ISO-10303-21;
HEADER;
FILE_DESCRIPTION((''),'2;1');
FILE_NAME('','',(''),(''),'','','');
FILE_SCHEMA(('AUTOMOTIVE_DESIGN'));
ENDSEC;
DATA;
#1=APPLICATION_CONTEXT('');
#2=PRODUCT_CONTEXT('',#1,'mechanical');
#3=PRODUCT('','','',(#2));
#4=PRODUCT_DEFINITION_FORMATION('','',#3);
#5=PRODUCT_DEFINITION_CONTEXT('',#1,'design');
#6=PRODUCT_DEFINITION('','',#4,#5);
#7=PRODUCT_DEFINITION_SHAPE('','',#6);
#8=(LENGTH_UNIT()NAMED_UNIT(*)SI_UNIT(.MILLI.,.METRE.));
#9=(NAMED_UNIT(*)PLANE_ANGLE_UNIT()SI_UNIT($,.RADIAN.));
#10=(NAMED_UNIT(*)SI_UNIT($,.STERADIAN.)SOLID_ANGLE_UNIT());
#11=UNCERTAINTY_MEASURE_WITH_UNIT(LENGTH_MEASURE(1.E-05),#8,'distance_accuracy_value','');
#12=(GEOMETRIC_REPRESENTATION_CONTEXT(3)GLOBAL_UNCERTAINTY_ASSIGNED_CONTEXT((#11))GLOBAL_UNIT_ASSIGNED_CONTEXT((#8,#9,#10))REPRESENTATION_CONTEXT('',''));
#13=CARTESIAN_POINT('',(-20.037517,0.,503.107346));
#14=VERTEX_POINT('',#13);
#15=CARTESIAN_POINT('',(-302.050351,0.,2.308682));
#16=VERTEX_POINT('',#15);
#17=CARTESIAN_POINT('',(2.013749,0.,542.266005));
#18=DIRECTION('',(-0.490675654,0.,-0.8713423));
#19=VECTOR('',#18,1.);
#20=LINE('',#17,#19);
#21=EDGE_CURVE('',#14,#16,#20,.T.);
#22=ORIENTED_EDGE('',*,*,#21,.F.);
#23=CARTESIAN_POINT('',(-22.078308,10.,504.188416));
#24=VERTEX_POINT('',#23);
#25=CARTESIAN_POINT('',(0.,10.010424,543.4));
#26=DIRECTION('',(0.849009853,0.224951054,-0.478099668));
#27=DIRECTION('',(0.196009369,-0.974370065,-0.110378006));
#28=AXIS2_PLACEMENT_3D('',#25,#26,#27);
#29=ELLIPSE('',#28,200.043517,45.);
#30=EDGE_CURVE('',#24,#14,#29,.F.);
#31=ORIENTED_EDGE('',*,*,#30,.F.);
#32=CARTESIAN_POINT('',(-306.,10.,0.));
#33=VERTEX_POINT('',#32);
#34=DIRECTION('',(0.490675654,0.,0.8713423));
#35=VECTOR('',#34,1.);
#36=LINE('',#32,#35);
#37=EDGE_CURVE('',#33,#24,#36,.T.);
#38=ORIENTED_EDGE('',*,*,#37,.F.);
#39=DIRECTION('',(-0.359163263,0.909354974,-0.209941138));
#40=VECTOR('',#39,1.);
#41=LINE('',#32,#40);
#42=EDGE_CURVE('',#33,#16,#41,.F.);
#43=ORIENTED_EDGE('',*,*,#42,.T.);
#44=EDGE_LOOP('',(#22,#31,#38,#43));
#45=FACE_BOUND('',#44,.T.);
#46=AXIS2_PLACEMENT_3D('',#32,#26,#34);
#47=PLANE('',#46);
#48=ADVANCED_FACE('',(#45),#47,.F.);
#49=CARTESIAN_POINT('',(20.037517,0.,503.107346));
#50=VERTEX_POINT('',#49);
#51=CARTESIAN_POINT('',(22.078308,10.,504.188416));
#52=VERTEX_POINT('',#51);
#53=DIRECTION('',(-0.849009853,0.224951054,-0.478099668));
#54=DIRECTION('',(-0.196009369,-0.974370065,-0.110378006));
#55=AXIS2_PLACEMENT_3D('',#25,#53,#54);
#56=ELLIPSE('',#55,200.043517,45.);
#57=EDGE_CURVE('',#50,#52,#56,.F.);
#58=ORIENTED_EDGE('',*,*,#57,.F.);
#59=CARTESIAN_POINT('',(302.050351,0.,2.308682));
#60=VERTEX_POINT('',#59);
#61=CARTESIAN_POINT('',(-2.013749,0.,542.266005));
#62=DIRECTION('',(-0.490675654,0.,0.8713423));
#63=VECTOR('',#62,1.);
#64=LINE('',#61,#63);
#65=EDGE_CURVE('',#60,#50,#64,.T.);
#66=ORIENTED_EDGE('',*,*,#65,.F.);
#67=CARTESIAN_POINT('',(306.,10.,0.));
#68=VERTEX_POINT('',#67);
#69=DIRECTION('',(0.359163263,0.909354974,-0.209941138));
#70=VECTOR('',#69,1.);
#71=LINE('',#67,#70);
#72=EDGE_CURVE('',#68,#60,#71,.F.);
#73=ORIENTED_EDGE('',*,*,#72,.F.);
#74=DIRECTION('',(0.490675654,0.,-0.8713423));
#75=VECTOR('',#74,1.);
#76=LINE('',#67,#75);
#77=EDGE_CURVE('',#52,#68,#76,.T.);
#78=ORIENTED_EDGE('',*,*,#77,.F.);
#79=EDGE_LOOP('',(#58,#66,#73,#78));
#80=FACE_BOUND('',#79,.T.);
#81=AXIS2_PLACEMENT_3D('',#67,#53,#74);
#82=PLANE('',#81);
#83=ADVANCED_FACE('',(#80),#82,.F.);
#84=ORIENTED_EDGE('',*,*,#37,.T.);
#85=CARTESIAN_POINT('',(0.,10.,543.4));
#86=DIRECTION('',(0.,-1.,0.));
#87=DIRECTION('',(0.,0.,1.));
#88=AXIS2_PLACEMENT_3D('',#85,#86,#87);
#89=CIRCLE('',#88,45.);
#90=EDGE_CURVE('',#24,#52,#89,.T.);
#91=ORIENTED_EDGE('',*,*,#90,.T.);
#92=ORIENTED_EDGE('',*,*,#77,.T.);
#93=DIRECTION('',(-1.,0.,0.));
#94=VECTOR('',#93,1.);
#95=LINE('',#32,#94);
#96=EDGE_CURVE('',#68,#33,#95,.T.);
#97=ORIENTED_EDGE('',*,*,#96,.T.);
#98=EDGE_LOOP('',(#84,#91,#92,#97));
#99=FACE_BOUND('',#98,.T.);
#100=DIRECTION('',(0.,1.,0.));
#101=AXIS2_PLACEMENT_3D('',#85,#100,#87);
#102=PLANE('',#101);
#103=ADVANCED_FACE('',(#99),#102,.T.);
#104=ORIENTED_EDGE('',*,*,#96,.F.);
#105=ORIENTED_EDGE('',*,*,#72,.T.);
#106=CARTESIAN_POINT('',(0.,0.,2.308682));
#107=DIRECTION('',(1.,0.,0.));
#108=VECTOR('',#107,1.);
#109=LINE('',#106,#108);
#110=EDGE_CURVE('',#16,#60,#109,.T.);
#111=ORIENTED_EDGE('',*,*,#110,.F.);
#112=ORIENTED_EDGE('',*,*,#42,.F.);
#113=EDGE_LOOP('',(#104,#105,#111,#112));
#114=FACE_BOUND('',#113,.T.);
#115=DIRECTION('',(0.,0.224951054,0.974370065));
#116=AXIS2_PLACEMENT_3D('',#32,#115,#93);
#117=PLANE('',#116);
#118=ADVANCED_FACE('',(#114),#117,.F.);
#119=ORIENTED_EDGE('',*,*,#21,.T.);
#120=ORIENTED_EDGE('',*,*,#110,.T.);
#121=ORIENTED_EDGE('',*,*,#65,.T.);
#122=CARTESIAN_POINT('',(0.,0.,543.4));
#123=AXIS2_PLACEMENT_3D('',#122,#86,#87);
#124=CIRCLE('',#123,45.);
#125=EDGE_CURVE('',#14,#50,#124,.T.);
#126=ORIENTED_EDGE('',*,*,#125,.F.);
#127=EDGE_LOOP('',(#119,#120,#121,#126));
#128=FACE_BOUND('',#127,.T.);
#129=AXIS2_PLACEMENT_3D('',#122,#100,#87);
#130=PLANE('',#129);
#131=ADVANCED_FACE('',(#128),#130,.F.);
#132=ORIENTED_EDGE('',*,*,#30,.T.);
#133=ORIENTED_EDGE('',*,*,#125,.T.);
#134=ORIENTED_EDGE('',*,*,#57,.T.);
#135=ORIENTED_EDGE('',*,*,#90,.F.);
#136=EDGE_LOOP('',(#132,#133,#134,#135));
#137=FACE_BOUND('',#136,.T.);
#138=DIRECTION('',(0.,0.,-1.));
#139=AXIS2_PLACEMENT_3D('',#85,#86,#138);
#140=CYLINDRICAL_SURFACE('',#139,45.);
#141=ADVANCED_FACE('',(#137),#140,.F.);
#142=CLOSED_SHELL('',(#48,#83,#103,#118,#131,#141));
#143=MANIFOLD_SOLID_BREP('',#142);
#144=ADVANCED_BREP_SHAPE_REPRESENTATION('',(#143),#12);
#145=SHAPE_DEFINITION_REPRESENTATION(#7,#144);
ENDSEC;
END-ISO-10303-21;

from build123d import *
from OCP.BRepFilletAPI import BRepFilletAPI_MakeChamfer

# Parameters (mm, degrees)
BOSS_EXTRUDE1_DEPTH = 10
CHAMFER1_SIZE       = 10
CHAMFER1_SIZE_2     = 2.308681911


with BuildPart() as part:
    # Sketch1 → Boss-Extrude1 (new body)
    with BuildSketch(Plane(origin=(0, 0, 0), x_dir=(1, 0, 0), z_dir=(0, 1, 0))):
        with BuildLine():
            Line((-306, 0), (306, 0))
            Line((306, 0), (22.078307516, -504.188415778))
            ThreePointArc((22.078307516, -504.188415778), (0, -498.4), (-22.078307516, -504.188415778))
            Line((-22.078307516, -504.188415778), (-306, 0))
        make_face()
    extrude(amount=BOSS_EXTRUDE1_DEPTH)

    # Chamfer1
    chamfer1_edges_1 = [part.edges().sort_by_distance(p)[0] for p in [
        (-164.039153758, 0, 252.094207889),
    ]]
    chamfer1_side_1 = [part.faces().sort_by_distance(p)[0] for p in [
        (-164.039153758, 0.046173638, 252.094207889),
    ]]
    chamfer1_edges_2 = [part.edges().sort_by_distance(p)[0] for p in [
        (0, 0, 0),
    ]]
    chamfer1_side_2 = [part.faces().sort_by_distance(p)[0] for p in [
        (0, 0.046173638, 0),
    ]]
    chamfer1_edges_3 = [part.edges().sort_by_distance(p)[0] for p in [
        (164.039153758, 0, 252.094207889),
    ]]
    chamfer1_side_3 = [part.faces().sort_by_distance(p)[0] for p in [
        (164.039153758, 0.046173638, 252.094207889),
    ]]
    chamfer1 = BRepFilletAPI_MakeChamfer(part.part.solid().wrapped)
    for e in chamfer1_edges_1:
        chamfer1.Add(CHAMFER1_SIZE - 0.0001, CHAMFER1_SIZE_2 - 0.0001, e.wrapped, chamfer1_side_1[0].wrapped)
    for e in chamfer1_edges_2:
        chamfer1.Add(CHAMFER1_SIZE - 0.0001, CHAMFER1_SIZE_2 - 0.0001, e.wrapped, chamfer1_side_2[0].wrapped)
    for e in chamfer1_edges_3:
        chamfer1.Add(CHAMFER1_SIZE - 0.0001, CHAMFER1_SIZE_2 - 0.0001, e.wrapped, chamfer1_side_3[0].wrapped)
    add(Compound.cast(chamfer1.Shape()), mode=Mode.REPLACE)  # a hair under: the kernel refuses the full size


solid = part.part
